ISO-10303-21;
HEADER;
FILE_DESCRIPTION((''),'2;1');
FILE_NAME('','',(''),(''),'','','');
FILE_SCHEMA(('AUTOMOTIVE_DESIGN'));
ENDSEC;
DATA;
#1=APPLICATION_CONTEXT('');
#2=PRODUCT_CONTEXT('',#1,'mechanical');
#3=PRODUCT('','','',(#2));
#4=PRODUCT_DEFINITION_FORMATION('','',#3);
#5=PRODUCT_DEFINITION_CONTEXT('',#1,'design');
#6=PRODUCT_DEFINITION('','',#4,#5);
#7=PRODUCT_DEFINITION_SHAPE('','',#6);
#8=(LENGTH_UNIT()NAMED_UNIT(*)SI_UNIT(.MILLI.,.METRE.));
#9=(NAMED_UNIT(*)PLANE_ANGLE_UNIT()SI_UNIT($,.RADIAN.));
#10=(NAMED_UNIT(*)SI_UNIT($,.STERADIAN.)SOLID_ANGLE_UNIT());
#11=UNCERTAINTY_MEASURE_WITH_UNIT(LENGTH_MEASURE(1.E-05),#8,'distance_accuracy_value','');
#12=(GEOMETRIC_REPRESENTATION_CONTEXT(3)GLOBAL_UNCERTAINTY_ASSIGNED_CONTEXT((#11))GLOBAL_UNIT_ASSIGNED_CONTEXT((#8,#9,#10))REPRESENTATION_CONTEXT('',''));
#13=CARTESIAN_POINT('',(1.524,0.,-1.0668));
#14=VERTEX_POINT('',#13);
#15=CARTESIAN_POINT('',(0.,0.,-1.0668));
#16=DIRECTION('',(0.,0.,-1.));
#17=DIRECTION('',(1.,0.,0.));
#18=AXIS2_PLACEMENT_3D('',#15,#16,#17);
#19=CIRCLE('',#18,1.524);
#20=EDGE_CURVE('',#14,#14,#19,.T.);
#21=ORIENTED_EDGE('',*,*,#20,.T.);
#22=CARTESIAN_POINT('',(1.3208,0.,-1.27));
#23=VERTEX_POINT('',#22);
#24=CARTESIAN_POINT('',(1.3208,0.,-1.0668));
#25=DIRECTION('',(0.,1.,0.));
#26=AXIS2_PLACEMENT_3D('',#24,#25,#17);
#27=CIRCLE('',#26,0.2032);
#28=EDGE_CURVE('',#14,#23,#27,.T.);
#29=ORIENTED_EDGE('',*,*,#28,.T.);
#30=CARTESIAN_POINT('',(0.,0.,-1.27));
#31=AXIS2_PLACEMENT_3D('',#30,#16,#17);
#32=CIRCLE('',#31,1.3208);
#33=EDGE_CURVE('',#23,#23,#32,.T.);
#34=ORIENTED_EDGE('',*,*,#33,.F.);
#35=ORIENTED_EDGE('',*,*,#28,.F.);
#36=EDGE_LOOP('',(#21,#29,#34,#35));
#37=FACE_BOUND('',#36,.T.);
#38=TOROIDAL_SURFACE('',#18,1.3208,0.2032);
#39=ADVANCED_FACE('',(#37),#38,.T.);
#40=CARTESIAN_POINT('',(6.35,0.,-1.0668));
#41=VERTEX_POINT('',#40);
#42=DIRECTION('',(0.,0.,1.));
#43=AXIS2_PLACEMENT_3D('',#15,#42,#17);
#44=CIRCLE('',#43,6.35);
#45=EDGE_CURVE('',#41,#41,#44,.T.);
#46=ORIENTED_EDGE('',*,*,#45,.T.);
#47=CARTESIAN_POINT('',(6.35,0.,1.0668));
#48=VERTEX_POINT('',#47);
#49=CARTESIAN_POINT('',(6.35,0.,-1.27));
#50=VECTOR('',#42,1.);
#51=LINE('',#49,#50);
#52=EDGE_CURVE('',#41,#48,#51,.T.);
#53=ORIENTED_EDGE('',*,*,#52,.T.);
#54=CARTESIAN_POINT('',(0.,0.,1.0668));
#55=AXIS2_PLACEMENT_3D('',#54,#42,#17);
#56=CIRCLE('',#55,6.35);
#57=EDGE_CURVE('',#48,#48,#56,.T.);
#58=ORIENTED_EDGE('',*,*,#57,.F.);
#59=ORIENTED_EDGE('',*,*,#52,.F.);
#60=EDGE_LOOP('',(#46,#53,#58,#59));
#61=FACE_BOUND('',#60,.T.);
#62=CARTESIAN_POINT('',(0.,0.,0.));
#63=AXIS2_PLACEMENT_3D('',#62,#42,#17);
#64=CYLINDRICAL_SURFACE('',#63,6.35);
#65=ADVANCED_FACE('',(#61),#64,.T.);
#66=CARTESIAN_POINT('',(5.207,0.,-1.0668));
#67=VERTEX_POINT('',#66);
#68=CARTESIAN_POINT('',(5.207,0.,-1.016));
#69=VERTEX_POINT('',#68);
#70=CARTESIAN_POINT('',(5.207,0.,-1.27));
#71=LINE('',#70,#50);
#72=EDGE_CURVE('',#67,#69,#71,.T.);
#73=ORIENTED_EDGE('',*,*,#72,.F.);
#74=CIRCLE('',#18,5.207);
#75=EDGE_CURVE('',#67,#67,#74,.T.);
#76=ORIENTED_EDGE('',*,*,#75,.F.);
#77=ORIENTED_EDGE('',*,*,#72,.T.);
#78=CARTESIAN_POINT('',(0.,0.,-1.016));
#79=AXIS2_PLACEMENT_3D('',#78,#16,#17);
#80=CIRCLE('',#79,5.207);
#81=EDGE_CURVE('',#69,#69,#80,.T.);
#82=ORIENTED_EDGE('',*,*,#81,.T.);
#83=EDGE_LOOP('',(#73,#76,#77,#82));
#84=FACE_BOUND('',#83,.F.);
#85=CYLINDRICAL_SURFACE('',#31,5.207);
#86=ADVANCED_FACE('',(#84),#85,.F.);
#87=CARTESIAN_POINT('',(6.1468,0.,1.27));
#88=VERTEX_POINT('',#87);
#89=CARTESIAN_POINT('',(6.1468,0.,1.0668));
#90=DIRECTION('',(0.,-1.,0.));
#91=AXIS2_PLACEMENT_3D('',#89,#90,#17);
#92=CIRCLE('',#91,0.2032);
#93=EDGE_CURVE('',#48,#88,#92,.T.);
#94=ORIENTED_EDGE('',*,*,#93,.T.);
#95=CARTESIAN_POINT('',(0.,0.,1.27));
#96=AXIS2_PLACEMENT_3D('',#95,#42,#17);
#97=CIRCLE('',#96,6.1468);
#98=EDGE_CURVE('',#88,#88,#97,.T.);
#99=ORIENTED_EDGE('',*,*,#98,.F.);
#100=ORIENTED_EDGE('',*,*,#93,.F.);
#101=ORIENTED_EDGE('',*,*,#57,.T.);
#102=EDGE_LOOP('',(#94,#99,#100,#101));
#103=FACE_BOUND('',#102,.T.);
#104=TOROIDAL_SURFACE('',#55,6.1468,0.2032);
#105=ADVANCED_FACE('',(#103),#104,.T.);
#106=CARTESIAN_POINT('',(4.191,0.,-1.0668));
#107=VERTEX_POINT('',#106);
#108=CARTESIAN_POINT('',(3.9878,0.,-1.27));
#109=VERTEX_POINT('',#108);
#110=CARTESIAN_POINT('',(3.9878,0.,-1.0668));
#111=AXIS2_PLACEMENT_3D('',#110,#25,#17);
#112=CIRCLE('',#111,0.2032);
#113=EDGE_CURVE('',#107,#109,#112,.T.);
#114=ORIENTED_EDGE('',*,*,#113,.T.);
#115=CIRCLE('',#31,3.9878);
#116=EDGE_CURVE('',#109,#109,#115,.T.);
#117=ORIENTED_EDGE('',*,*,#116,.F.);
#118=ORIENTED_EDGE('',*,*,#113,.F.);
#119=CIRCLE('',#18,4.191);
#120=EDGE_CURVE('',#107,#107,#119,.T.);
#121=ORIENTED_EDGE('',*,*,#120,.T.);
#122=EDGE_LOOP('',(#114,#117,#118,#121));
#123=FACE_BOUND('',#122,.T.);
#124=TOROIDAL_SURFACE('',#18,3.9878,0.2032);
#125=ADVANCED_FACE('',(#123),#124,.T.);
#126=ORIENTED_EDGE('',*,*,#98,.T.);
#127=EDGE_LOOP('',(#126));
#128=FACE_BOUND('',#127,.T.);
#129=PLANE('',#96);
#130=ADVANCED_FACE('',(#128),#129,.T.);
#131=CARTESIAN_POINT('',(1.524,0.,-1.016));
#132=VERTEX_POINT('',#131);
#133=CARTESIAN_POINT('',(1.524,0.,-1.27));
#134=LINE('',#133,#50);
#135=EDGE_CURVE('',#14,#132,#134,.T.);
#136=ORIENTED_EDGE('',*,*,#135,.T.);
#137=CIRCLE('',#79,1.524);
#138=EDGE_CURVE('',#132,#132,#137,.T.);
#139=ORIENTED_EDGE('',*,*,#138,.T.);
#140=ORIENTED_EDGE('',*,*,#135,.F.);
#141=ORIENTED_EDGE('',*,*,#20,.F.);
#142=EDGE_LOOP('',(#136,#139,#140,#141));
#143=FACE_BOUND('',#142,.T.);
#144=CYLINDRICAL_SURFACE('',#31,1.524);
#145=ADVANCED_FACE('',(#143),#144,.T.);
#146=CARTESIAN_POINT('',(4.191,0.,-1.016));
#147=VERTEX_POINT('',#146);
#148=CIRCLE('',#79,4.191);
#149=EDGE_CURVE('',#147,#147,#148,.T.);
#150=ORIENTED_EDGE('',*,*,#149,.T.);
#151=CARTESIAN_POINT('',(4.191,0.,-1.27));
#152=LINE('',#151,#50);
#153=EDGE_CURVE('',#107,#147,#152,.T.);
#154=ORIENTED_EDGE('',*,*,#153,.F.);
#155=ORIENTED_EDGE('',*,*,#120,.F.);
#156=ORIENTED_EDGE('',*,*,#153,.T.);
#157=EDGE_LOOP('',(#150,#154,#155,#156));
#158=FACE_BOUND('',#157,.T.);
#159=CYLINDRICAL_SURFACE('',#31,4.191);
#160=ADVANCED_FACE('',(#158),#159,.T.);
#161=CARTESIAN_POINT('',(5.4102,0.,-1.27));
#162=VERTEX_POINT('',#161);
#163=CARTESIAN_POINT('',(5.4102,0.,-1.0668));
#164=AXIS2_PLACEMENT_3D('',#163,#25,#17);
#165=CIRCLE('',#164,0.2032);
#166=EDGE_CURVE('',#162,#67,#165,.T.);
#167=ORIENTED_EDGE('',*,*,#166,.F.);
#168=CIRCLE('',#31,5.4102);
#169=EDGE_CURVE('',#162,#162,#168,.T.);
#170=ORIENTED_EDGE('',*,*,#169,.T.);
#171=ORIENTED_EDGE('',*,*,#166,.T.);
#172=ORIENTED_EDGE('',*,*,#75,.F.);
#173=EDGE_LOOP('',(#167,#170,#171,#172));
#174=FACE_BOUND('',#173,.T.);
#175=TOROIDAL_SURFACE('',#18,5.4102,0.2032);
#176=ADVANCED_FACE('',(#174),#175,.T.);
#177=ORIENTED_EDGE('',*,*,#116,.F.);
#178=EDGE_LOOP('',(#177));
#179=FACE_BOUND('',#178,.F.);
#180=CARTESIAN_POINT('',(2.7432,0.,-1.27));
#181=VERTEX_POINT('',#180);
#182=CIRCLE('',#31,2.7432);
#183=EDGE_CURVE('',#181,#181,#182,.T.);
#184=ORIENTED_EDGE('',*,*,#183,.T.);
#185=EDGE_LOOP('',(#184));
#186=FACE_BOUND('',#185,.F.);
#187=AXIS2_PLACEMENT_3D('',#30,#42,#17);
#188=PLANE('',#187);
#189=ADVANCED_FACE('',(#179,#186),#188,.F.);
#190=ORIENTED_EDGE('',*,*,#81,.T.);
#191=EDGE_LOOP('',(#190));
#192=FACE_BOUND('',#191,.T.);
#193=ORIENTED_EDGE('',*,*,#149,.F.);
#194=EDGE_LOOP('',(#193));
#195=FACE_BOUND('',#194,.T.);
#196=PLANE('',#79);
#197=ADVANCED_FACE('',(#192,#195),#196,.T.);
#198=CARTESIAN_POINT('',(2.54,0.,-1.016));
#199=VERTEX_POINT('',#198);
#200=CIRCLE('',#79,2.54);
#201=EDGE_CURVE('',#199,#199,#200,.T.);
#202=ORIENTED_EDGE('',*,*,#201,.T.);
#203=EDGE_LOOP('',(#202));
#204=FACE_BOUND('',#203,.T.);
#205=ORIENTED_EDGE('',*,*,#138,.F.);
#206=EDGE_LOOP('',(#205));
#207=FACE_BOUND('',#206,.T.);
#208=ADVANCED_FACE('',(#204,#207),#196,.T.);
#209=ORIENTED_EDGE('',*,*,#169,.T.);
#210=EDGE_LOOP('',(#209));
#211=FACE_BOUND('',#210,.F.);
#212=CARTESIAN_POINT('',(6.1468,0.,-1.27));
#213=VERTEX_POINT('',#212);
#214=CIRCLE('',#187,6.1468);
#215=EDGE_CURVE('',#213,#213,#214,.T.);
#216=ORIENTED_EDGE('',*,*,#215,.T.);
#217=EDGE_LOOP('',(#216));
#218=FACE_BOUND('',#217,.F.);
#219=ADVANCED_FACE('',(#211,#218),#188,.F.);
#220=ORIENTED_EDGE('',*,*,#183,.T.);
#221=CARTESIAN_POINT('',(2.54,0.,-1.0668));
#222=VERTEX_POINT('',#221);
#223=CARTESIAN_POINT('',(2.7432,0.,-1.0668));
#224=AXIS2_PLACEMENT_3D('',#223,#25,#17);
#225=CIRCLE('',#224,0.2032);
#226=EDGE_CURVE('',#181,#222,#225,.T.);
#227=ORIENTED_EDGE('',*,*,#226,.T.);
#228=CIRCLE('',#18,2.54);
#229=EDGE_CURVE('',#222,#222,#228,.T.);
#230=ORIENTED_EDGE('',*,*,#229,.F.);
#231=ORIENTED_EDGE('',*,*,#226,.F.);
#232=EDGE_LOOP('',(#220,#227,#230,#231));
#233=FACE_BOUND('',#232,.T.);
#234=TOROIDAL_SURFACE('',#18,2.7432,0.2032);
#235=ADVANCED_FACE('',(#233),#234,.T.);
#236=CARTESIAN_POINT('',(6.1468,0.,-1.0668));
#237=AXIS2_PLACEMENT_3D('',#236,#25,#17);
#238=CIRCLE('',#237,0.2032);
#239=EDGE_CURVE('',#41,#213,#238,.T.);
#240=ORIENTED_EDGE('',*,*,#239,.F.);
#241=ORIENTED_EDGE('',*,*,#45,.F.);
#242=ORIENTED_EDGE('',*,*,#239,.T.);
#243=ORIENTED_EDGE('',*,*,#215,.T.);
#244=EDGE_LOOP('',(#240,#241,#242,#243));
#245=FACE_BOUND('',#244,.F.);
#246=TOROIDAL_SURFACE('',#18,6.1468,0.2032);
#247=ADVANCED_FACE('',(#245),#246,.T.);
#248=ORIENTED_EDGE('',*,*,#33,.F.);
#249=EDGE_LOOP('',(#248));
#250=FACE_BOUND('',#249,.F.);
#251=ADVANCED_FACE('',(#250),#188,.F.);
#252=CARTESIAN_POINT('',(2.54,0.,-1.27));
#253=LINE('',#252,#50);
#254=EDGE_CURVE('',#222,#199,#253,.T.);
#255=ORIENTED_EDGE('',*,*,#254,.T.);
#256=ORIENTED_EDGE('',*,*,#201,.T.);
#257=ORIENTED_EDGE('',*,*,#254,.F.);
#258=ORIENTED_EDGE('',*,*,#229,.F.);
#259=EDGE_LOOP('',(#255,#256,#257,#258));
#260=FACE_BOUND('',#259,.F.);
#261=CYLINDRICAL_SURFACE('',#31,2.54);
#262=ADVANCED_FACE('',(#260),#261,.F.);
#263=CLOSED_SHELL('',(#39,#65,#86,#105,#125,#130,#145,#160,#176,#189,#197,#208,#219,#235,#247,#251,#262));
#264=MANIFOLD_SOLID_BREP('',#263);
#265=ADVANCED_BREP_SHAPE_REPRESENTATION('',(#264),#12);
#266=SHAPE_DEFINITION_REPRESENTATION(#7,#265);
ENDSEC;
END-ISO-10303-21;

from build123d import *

# Parameters (mm, degrees)
F0_R     = 6.35
F1_DEPTH = 1.27
F2_R     = 0.2032
F3_R     = 5.207
F3_R_2   = 4.191
F3_R_3   = 2.54
F3_R_4   = 1.524
F4_DEPTH = 0.254
F5_R     = 0.2032


with BuildPart() as f1:
    # F0 (on Top) → F1 (new body, symmetric)
    with BuildSketch(Plane.XY):
        Circle(F0_R)
    extrude(amount=F1_DEPTH, both=True)

    # F2
    f2_edges = [f1.edges().sort_by_distance(p)[0] for p in [
        (-6.35, 0, -1.27),
        (-6.35, 0, 1.27),
    ]]
    fillet(f2_edges, radius=F2_R)

    # F3 (on face) → F4 (cut)
    with BuildSketch(Plane(origin=(0, 0, -1.27), x_dir=(1, 0, 0), z_dir=(0, 0, -1))):
        Circle(F3_R)
        Circle(F3_R_2, mode=Mode.SUBTRACT)
        Circle(F3_R_3)
        Circle(F3_R_4, mode=Mode.SUBTRACT)
    extrude(amount=-F4_DEPTH, mode=Mode.SUBTRACT)

    # F5
    f5_edges = [f1.edges().sort_by_distance(p)[0] for p in [
        (-5.207, 0, -1.27),
        (-4.191, 0, -1.27),
        (-2.54, 0, -1.27),
        (-1.524, 0, -1.27),
    ]]
    fillet(f5_edges, radius=F5_R)


solid = f1.part
